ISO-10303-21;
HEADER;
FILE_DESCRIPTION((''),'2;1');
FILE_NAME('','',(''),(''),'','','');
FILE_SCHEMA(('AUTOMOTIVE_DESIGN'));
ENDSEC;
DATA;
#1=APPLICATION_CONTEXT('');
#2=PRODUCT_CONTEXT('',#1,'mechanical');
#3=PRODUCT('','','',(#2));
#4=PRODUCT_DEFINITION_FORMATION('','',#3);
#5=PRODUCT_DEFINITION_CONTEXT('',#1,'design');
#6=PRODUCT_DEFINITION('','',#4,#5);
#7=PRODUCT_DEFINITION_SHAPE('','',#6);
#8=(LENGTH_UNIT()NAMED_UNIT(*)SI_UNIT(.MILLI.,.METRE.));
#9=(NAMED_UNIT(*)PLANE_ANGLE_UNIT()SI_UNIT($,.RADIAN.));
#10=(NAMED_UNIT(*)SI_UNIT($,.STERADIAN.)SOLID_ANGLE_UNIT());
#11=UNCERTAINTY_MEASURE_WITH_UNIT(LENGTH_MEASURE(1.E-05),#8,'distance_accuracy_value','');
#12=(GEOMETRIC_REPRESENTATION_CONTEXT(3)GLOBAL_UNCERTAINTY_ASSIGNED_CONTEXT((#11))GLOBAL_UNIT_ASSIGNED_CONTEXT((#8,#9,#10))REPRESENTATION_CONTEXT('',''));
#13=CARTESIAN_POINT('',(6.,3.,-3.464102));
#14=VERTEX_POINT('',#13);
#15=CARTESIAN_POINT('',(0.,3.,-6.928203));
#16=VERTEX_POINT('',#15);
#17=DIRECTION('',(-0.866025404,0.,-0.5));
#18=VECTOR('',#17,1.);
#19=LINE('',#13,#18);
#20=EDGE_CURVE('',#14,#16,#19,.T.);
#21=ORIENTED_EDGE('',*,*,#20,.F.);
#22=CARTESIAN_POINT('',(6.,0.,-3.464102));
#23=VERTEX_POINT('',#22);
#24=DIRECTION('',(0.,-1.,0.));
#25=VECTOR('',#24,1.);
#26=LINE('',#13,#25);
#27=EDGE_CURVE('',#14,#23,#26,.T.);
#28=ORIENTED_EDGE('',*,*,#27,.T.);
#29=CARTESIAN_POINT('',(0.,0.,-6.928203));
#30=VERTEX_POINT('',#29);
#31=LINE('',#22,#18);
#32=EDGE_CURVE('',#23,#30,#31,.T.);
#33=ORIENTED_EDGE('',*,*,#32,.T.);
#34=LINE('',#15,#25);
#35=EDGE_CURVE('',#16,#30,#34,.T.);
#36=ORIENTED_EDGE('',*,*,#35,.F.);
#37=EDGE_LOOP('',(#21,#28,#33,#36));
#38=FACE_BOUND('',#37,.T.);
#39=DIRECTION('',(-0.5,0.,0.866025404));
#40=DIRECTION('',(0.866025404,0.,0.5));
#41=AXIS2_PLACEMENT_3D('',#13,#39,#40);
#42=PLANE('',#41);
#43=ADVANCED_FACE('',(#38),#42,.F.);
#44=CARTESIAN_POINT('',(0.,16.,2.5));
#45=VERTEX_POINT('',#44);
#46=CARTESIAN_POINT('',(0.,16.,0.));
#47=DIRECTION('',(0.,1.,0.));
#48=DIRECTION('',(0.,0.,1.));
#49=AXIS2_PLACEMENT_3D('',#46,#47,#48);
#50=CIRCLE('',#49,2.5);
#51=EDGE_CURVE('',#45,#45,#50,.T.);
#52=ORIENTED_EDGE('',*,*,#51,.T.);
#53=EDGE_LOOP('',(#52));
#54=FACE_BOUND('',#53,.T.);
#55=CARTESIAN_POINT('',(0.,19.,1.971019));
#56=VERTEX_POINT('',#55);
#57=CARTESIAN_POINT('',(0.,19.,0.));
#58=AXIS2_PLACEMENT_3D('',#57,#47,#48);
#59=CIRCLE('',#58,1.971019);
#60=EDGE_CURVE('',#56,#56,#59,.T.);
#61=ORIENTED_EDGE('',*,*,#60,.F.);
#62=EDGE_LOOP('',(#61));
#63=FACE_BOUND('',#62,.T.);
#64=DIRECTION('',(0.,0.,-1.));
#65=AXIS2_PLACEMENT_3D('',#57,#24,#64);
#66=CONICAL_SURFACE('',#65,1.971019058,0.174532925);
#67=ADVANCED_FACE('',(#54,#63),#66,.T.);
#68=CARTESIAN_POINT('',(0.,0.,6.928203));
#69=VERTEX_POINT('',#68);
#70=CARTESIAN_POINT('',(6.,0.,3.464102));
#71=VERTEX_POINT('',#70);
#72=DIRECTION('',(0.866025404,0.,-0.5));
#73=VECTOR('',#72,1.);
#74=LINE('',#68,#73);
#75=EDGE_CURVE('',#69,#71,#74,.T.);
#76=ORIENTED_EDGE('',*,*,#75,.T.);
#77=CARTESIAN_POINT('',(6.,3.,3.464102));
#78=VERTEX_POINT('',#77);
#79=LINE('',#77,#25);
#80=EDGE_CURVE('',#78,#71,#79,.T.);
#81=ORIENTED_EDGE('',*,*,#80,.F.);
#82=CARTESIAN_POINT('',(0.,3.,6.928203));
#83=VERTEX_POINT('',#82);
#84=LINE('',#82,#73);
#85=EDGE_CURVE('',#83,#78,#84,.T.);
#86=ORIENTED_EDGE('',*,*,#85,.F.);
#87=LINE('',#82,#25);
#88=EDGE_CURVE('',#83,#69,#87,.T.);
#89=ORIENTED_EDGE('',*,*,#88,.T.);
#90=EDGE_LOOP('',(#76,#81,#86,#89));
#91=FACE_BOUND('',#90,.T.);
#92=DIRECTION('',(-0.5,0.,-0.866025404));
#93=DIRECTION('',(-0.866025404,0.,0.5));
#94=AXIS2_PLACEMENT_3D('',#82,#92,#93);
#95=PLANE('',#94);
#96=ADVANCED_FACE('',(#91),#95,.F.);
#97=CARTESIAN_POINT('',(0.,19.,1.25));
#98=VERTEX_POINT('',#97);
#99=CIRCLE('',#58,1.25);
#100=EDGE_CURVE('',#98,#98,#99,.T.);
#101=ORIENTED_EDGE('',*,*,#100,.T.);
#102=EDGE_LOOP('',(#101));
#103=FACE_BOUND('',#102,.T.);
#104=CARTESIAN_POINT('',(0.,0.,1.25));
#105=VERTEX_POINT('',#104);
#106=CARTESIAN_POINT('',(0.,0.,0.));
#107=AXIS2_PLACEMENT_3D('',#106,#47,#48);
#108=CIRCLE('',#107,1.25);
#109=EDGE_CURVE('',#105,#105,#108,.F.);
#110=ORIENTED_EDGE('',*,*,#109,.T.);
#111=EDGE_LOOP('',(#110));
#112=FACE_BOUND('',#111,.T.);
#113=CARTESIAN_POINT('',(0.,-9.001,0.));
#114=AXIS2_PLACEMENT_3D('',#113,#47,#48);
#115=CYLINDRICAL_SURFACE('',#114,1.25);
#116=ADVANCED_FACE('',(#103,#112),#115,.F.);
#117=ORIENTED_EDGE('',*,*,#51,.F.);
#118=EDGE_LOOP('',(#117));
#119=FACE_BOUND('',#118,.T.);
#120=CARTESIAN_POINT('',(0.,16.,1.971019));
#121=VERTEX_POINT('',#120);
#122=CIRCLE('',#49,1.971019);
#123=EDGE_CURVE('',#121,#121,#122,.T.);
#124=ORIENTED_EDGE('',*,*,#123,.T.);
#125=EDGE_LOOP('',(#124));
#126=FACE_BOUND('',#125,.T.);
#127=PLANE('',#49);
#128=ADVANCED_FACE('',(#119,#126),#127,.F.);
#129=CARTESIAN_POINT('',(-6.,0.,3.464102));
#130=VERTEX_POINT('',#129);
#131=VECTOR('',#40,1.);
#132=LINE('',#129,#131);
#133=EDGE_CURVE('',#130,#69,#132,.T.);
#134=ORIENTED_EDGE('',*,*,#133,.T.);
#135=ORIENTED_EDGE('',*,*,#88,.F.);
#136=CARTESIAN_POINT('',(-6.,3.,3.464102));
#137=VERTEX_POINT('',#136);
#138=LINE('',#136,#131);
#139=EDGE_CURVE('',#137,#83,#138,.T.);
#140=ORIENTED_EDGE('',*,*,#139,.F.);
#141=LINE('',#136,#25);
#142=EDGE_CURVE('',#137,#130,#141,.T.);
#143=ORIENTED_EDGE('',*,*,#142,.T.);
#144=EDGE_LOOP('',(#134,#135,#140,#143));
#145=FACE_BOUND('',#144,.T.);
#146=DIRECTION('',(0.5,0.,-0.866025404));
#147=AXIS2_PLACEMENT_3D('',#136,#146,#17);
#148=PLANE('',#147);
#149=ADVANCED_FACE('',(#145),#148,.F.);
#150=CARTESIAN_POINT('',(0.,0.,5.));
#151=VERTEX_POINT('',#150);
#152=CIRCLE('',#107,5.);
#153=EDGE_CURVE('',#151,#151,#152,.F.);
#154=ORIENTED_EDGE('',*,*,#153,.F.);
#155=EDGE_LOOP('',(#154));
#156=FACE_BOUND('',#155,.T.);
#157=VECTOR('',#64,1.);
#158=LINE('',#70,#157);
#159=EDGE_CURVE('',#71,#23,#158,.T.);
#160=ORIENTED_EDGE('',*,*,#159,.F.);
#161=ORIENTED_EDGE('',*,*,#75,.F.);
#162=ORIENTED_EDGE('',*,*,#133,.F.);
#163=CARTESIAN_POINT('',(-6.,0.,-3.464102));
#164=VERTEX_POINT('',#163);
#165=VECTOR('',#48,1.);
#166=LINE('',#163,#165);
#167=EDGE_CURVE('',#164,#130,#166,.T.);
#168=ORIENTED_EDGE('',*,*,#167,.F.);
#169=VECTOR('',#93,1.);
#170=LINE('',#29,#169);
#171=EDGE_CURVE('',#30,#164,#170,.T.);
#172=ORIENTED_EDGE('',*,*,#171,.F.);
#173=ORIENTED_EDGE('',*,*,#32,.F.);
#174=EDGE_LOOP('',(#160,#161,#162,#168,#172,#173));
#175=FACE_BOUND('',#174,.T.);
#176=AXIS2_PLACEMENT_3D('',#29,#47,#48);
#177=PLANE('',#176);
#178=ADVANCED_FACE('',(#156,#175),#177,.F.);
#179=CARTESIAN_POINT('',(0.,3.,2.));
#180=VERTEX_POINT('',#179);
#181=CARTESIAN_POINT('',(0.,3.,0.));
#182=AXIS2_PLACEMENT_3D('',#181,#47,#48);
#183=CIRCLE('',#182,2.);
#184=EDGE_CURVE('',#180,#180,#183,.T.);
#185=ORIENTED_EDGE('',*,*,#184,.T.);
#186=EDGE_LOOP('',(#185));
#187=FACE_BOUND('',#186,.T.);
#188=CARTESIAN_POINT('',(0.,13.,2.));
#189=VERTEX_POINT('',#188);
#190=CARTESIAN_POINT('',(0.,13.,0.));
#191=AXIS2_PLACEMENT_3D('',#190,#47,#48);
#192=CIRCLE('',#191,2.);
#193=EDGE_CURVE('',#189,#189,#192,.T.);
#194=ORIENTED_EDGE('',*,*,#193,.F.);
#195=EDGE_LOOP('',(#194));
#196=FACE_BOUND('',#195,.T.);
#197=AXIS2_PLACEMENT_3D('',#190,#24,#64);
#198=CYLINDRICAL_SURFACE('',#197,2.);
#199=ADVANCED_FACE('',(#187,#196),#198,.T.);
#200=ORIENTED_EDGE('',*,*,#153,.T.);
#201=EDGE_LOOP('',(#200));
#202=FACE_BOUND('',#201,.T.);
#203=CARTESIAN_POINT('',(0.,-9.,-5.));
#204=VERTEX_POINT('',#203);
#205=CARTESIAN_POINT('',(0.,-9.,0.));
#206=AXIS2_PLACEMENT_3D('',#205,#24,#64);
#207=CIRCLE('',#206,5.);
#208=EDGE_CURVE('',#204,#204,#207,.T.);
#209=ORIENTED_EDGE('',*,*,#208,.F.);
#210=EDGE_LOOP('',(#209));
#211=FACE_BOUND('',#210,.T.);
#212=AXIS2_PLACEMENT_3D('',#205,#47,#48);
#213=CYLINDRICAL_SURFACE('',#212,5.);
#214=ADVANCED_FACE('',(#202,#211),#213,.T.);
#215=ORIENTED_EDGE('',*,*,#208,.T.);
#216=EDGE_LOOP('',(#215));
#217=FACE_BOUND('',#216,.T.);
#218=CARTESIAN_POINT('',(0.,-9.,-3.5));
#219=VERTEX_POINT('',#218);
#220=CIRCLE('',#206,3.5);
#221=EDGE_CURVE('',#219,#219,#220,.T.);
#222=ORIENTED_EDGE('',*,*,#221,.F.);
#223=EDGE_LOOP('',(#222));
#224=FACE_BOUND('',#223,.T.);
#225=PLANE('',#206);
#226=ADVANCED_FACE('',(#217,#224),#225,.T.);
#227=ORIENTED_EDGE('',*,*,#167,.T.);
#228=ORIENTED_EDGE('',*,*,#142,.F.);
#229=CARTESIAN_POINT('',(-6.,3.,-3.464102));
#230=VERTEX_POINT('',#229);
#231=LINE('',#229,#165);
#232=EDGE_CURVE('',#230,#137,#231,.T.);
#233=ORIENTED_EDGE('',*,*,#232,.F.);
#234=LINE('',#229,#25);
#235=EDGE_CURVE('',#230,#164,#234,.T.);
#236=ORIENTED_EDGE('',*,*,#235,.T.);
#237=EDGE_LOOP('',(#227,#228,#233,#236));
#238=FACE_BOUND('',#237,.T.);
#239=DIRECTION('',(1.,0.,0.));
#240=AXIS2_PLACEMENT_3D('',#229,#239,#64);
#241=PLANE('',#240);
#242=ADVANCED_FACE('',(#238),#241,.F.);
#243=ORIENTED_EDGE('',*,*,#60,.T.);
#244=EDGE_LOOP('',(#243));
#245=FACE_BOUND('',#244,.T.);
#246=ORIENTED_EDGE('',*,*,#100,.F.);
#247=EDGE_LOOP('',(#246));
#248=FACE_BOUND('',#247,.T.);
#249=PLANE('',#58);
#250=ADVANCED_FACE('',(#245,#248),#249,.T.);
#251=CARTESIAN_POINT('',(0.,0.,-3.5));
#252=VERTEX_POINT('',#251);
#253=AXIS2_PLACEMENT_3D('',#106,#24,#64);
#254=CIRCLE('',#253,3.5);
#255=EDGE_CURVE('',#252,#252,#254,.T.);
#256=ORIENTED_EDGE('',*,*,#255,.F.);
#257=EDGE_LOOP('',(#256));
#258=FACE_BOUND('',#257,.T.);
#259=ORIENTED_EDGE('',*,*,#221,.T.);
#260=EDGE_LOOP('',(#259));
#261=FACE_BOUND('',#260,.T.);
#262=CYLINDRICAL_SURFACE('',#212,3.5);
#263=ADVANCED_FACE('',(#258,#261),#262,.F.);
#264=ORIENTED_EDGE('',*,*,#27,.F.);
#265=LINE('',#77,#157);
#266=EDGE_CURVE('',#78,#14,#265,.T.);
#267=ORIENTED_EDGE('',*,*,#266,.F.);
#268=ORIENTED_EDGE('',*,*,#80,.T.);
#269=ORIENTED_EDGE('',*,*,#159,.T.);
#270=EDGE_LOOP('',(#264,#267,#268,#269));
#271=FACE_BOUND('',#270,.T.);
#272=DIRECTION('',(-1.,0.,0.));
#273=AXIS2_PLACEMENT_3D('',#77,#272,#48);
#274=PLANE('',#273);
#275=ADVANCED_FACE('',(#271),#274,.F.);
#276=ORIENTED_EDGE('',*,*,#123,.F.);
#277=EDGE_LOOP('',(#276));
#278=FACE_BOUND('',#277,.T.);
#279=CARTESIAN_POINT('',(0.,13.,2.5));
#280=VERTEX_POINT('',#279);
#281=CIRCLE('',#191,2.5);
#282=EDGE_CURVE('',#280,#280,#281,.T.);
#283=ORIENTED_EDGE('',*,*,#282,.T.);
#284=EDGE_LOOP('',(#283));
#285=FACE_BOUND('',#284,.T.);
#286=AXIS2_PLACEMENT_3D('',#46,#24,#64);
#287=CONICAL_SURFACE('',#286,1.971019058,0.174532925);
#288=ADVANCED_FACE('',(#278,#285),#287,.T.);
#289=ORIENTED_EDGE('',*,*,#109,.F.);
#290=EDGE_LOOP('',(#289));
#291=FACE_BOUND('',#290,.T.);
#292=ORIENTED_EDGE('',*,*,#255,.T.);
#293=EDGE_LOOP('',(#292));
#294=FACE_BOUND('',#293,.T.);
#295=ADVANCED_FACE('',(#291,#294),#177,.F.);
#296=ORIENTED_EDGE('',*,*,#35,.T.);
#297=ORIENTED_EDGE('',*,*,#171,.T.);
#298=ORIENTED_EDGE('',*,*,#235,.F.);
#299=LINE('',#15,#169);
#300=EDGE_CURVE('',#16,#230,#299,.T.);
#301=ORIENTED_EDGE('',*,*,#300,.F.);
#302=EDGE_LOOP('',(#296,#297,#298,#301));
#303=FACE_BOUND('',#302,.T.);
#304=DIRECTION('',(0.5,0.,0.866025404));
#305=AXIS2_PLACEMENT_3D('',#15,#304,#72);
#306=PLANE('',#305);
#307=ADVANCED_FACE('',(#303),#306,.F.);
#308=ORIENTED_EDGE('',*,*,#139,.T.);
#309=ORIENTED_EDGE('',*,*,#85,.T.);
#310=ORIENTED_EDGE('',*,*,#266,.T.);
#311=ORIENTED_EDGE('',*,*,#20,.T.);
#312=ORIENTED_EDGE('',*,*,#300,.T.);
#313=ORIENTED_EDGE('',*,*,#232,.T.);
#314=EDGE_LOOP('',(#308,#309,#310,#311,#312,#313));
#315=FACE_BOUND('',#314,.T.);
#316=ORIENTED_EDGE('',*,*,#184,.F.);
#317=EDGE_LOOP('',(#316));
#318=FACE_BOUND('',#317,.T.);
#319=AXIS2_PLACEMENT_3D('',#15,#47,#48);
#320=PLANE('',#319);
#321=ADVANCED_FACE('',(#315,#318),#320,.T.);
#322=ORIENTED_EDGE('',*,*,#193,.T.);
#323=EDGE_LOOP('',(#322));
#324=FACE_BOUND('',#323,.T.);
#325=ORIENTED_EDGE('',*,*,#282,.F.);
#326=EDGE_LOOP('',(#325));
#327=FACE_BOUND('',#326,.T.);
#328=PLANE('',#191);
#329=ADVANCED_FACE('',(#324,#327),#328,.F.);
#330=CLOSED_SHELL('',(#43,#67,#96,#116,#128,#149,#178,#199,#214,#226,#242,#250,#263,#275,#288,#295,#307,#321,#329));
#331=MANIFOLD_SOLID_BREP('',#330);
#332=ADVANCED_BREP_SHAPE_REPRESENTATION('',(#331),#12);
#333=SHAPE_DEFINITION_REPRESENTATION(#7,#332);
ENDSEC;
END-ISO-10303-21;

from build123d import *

# Parameters (mm, degrees)
EXTRUSION1_DEPTH  = 3
ESQUISSE3_R       = 5
ESQUISSE3_R_2     = 3.5
EXTRUSION2_DEPTH  = 9
ESQUISSE4_R       = 2
EXTRUSION3_DEPTH  = 10
ESQUISSE5_R       = 2.5
EXTRUSION4_DEPTH  = 3
CHANFREIN1_SIZE   = 3
CHANFREIN1_SIZE_2 = 0.528980942
ESQUISSE6_R       = 2.5
EXTRUSION5_DEPTH  = 3
CHANFREIN2_SIZE   = 3
CHANFREIN2_SIZE_2 = 0.528980942
EXTRUSION6_REACH  = 31.462
ESQUISSE7_R       = 1.25


with BuildPart() as part:
    # Esquisse2 → Extrusion1 (new body)
    with BuildSketch(Plane(origin=(0, 0, 0), x_dir=(1, 0, 0), z_dir=(0, 1, 0))):
        Polygon((0, 6.92820323), (-6, 3.464101615), (-6, -3.464101615), (0, -6.92820323), (6, -3.464101615), (6, 3.464101615), align=None)
    extrude(amount=EXTRUSION1_DEPTH)

    # Esquisse3 → Extrusion2 (add)
    with BuildSketch(Plane.XZ):
        with Locations(Location((0, 0, 0), (0, 0, 90))):
            Circle(ESQUISSE3_R)
        with Locations(Location((0, 0, 0), (0, 0, 270))):
            Circle(ESQUISSE3_R_2, mode=Mode.SUBTRACT)
    extrude(amount=EXTRUSION2_DEPTH)

    # Esquisse4 → Extrusion3 (add)
    with BuildSketch(Plane(origin=(0, 3, 0), x_dir=(-1, 0, 0), z_dir=(0, 1, 0))):
        with Locations(Location((0, 0, 0), (0, 0, 90))):
            Circle(ESQUISSE4_R)
    extrude(amount=EXTRUSION3_DEPTH)

    # Esquisse5 → Extrusion4 (add)
    with BuildSketch(Plane(origin=(0, 13, 0), x_dir=(1, 0, 0), z_dir=(0, 1, 0))):
        with Locations(Location((0, 0, 0), (0, 0, 270))):
            Circle(ESQUISSE5_R)
    extrude(amount=EXTRUSION4_DEPTH)

    # Chanfrein1
    # the kernel refuses this chamfer: 3, 0.528980942 mm, written as the material it takes off along each edge
    with BuildSketch(Plane(origin=(0, 16, 0), x_dir=(0, 0, 1), z_dir=(-1, 0, 0))) as chanfrein1_piece_1:
        Polygon((2.5, -CHANFREIN1_SIZE), (2.5 - CHANFREIN1_SIZE_2, 0), (2.5, 0), align=None)
    revolve(axis=Axis((0, 16, 0), (0, 1, 0)), mode=Mode.SUBTRACT)

    # Esquisse6 → Extrusion5 (add)
    with BuildSketch(Plane(origin=(0, 16, 0), x_dir=(1, 0, 0), z_dir=(0, 1, 0))):
        with Locations(Location((0, 0, 0), (0, 0, 270))):
            Circle(ESQUISSE6_R)
    extrude(amount=EXTRUSION5_DEPTH)

    # Chanfrein2
    # the kernel refuses this chamfer: 3, 0.528980942 mm, written as the material it takes off along each edge
    with BuildSketch(Plane(origin=(0, 19, 0), x_dir=(0, 0, 1), z_dir=(-1, 0, 0))) as chanfrein2_piece_1:
        Polygon((2.5, -CHANFREIN2_SIZE), (2.5 - CHANFREIN2_SIZE_2, 0), (2.5, 0), align=None)
    revolve(axis=Axis((0, 19, 0), (0, 1, 0)), mode=Mode.SUBTRACT)

    # Esquisse7 → Extrusion6 (cut, up to next)
    with BuildSketch(Plane(origin=(0, 19, 0), x_dir=(1, 0, 0), z_dir=(0, 1, 0)), mode=Mode.PRIVATE) as extrusion6_sk1:
        with Locations(Location((0, 0, 0), (0, 0, 270))):
            Circle(ESQUISSE7_R)
    extrusion6_tool1 = extrude(extrusion6_sk1.sketch, amount=-EXTRUSION6_REACH, mode=Mode.PRIVATE) & part.part
    add(extrusion6_tool1.solids().sort_by_distance((0, 19, 0))[0], mode=Mode.SUBTRACT)


solid = part.part
